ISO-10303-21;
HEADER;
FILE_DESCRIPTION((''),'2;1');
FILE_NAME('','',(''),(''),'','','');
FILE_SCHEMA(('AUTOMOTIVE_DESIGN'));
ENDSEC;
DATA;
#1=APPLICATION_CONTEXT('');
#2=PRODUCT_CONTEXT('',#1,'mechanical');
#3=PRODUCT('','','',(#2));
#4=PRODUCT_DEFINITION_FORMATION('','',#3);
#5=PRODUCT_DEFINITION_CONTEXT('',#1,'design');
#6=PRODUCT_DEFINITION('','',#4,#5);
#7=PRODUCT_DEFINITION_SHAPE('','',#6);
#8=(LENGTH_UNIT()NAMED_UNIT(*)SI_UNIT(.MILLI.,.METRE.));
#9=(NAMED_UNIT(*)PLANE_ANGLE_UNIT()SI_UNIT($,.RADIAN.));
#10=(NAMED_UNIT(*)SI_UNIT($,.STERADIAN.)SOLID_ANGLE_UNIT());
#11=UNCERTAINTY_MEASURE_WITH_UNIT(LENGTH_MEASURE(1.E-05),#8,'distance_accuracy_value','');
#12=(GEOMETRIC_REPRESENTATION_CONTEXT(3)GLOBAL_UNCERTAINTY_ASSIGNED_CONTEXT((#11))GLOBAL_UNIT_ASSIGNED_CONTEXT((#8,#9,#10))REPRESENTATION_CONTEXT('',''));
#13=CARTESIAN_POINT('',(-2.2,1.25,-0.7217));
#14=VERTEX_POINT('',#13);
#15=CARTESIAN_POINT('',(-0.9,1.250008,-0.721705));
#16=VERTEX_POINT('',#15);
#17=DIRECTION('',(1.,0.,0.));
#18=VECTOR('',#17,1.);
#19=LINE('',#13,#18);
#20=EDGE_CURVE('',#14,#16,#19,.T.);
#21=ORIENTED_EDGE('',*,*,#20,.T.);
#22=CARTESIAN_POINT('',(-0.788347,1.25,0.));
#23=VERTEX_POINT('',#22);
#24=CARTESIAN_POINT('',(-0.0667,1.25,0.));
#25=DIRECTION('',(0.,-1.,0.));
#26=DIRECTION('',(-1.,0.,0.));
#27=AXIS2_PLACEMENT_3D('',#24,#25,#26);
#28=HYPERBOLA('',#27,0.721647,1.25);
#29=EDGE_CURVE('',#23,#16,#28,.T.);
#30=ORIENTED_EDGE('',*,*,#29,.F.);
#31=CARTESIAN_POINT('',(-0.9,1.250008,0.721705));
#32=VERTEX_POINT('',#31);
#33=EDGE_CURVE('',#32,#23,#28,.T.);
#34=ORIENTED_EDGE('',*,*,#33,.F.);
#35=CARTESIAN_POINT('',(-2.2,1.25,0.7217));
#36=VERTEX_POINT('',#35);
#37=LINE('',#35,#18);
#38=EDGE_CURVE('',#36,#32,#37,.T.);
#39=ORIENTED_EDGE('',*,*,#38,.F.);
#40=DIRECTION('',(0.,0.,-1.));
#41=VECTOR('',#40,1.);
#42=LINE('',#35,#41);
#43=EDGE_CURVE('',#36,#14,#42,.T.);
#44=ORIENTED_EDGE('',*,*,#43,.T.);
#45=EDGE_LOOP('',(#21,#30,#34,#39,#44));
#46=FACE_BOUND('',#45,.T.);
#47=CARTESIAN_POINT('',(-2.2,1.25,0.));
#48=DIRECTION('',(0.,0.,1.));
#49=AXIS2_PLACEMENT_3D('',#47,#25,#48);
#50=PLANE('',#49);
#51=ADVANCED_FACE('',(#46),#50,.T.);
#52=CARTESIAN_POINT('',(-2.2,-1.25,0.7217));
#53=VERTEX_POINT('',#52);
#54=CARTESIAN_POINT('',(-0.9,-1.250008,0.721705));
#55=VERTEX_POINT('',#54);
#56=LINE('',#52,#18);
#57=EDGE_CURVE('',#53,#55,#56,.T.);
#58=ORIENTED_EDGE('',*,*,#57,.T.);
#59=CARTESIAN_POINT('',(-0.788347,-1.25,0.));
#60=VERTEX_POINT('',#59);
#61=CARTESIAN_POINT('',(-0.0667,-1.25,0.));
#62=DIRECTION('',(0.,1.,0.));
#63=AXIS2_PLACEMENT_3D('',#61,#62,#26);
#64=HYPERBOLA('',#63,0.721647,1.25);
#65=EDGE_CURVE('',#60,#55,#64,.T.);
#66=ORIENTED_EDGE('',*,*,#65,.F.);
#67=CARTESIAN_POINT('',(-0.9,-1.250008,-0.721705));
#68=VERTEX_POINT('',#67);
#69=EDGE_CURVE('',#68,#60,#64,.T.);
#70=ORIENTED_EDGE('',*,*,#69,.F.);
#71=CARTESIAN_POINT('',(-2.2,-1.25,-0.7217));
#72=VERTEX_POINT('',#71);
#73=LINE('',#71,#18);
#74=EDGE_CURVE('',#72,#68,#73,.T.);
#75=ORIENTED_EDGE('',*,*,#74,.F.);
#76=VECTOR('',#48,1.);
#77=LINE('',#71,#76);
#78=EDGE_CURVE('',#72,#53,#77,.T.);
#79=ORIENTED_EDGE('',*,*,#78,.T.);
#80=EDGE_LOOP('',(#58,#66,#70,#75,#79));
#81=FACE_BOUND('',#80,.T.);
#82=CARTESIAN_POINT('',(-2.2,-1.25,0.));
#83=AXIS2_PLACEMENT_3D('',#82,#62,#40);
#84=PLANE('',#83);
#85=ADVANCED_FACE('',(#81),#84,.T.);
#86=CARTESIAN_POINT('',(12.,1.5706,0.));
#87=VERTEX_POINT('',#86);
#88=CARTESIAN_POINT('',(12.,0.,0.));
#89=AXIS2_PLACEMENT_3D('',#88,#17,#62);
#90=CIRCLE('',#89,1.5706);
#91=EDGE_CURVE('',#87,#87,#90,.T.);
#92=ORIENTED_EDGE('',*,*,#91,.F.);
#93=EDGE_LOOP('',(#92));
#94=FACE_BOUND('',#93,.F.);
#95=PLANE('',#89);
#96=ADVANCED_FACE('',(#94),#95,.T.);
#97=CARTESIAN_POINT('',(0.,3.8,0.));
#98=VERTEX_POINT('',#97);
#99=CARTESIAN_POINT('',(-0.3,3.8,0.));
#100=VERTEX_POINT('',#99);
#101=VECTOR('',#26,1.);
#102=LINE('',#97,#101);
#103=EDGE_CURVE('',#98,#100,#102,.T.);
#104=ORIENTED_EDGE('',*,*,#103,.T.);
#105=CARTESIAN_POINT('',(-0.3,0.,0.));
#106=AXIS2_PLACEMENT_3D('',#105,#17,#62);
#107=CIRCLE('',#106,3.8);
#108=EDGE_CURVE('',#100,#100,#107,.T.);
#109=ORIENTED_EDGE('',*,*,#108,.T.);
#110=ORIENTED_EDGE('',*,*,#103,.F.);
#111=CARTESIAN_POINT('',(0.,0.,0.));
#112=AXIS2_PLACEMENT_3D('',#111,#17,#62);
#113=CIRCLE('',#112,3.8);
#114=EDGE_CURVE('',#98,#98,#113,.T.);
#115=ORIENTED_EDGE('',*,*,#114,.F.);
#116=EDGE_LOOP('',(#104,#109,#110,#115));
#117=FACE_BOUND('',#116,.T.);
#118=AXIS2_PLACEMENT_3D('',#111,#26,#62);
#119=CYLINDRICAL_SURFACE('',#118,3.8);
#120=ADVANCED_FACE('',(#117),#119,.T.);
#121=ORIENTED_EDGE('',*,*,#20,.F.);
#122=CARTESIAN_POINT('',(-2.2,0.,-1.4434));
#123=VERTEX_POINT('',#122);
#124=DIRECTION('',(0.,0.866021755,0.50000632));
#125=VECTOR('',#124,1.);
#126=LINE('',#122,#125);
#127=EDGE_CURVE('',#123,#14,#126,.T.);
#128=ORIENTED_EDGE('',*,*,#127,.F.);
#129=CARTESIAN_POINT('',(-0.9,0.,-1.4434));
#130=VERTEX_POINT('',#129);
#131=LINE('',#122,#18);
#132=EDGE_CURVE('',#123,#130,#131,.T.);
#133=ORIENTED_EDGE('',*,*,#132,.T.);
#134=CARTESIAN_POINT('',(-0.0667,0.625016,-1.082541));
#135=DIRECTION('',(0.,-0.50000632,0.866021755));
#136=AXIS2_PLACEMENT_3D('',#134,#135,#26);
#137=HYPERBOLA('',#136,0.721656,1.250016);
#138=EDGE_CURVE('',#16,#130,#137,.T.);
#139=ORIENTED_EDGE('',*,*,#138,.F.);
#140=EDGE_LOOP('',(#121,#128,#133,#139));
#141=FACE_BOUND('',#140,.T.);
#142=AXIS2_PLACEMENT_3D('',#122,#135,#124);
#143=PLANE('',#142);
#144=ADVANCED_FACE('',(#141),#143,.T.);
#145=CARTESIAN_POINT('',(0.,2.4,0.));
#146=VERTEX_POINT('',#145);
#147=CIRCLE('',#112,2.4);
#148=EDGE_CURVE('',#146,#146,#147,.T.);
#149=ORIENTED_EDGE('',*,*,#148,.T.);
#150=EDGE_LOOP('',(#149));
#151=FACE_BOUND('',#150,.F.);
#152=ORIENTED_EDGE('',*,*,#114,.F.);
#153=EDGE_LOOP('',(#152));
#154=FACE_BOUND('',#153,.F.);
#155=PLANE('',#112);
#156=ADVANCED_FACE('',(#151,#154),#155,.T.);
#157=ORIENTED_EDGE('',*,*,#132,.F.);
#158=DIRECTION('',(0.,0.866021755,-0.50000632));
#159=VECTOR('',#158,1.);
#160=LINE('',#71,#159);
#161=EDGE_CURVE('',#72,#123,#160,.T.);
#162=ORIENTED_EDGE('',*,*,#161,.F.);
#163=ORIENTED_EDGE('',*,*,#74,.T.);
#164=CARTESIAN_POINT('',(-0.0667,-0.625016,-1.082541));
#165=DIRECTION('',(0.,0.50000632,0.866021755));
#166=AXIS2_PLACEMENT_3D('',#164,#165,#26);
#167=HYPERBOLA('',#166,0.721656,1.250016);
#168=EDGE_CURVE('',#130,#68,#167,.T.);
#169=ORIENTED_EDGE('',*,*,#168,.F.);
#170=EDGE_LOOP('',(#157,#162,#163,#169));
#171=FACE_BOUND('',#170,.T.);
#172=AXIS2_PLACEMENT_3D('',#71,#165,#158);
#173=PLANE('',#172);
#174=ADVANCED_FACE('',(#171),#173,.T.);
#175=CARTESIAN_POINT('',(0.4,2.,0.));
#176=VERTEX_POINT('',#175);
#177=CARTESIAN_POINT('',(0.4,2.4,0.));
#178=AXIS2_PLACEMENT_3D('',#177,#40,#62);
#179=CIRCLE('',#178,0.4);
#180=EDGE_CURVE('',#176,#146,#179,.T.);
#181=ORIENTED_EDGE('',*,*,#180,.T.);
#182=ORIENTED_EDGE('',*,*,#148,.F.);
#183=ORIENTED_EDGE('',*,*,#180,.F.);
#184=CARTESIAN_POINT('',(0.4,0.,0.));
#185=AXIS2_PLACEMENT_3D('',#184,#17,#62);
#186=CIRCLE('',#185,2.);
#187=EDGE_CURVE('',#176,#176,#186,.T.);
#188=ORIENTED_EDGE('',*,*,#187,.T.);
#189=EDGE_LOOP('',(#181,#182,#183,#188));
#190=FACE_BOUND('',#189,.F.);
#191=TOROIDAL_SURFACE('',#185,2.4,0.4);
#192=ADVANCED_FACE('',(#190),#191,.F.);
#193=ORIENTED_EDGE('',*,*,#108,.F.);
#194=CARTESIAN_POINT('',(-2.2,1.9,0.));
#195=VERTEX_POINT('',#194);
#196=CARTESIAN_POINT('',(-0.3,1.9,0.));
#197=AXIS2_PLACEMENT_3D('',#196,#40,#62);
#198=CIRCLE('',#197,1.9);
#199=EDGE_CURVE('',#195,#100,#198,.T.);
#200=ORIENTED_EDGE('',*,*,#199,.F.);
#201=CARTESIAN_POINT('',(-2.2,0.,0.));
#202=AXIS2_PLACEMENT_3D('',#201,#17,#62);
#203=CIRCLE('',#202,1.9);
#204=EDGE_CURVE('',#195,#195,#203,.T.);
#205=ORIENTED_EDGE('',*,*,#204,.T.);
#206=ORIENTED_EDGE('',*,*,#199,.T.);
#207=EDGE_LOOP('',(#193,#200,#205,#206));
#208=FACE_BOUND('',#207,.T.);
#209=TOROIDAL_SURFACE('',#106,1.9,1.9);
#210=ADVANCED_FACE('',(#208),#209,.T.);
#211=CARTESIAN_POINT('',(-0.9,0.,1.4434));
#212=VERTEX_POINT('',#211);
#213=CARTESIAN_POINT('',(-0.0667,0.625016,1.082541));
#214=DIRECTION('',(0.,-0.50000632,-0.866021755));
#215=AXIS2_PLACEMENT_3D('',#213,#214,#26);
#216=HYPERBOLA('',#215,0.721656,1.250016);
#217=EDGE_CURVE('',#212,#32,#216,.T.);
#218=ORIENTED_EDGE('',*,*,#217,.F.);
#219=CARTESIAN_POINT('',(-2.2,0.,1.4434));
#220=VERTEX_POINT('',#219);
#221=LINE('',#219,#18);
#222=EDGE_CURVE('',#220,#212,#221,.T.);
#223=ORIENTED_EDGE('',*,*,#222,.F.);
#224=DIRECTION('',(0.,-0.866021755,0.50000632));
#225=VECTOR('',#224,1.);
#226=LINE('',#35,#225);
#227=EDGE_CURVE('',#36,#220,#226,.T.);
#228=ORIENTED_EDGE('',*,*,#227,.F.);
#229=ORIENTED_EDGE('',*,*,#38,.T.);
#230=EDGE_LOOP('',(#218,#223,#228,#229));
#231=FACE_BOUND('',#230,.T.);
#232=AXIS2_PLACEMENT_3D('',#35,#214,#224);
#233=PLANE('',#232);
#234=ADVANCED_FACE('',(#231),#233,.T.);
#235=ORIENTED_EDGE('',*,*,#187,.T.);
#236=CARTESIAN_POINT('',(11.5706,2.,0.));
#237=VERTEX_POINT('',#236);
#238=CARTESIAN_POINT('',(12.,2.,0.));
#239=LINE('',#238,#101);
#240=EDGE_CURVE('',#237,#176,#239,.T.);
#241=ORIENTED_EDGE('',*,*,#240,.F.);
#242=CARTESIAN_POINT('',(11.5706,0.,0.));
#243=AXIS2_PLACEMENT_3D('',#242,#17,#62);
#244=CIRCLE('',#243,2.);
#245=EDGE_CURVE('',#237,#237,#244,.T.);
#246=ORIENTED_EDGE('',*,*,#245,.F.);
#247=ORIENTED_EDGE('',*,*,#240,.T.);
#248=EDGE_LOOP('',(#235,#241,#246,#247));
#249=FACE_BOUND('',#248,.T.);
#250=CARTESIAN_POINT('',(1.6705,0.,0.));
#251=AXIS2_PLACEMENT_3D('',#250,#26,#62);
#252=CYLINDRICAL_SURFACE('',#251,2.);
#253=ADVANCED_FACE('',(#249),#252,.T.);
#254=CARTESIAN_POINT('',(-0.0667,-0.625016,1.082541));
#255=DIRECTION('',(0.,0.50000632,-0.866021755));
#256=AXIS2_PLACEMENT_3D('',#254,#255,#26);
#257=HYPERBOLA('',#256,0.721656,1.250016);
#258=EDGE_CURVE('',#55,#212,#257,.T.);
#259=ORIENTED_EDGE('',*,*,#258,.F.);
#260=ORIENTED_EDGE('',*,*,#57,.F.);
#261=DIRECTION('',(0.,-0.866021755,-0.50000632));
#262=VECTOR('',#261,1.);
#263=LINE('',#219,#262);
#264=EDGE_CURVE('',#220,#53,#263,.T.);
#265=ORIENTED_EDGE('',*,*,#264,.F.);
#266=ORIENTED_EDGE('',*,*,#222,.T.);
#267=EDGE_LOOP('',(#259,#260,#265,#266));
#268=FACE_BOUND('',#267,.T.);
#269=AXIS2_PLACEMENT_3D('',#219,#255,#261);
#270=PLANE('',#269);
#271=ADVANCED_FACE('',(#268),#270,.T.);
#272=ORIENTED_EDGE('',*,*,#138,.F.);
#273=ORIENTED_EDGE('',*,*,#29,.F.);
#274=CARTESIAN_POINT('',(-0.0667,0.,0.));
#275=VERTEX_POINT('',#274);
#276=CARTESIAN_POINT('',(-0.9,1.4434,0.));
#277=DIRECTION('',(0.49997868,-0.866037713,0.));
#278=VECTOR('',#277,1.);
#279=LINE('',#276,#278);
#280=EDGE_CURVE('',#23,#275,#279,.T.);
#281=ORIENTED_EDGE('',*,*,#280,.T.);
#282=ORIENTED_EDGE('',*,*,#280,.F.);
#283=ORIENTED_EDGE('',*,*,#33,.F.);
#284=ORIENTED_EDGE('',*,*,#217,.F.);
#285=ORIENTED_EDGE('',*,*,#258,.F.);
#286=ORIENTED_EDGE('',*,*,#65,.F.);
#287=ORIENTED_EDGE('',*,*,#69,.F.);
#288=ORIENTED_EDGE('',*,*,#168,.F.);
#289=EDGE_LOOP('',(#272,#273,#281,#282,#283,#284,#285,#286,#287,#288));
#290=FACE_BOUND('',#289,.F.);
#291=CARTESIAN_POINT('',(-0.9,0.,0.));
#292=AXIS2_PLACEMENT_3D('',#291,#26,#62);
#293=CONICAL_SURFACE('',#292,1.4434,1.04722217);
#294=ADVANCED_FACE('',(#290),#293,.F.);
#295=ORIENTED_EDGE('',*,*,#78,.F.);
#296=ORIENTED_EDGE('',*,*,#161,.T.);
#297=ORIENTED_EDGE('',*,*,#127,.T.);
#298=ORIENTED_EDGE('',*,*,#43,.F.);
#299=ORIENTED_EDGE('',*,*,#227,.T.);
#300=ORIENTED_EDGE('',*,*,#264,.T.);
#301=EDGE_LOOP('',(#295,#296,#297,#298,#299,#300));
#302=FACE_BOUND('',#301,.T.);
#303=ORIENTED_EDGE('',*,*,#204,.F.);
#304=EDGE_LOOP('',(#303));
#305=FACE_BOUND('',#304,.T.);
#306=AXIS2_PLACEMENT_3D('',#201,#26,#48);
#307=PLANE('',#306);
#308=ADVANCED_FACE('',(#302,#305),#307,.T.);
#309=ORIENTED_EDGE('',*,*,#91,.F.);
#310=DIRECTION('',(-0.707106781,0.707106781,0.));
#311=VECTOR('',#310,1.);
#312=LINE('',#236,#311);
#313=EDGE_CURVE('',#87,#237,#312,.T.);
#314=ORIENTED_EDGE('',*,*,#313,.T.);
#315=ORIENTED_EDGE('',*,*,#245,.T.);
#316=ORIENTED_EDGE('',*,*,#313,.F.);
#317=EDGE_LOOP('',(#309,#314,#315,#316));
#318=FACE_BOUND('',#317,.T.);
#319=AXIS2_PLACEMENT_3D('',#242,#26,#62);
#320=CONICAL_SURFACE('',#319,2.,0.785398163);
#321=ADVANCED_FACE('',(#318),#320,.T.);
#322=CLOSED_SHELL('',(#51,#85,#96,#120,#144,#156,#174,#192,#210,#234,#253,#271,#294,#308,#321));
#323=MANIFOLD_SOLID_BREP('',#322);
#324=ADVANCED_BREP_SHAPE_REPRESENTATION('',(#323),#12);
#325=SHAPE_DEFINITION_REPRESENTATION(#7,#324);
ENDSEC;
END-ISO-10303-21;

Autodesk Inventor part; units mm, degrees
ref_plane "YZ Plane" through (0, 0, 0) normal (1, 0, 0) x (0, 1, 0)
ref_plane "XZ Plane" through (0, 0, 0) normal (0, 1, 0) x (-1, 0, 0)
sketch "Sketch1" plane through (0, 0, 0) normal (0, 0, 1) x (1, 0, 0)
  line L0 (-0.0667, 0) -> (12, 0)
  line L1 (12, 0) -> (12, 2)
  line L2 (12, 2) -> (2.1, 2)
  line L3 (2.1, 2) -> (1.6705, 2)
  line L4 (1.6705, 2) -> (0, 2)
  line L5 (0, 2) -> (0, 3.8)
  line L6 (0, 3.8) -> (-2.2, 3.8)
  line L7 (-2.2, 3.8) -> (-2.2, 1.4434)
  line L8 (-2.2, 1.4434) -> (-0.9, 1.4434)
  line L9 (-0.9, 1.4434) -> (-0.0667, 0)
  line L10 (-5.04, 0) -> (14.84, 0) projected
  line L11 (0, -0.76) -> (0, 4.56) projected
  line L12 (2.1, 2) -> (0, 2) construction
  dimension "d1" = 9.9
  dimension "d2" = 0.4295
  dimension "d3" = 2.2
  dimension "d4" = 1.3
  dimension "d5" = 60
  dimension "d6" = 4
  dimension "d7" = 4
  dimension "d8" = 2.8868
  dimension "d9" = 7.6
  dimension "d26" = 12
revolve "Body" add sketch "Sketch1" angle 360 about axis through (-0.0667, 0, 0) along (1, 0, 0)
sketch "Sketch2" plane through (-2.2, 0, 0) normal (-1, 0, 0) x (0, 0, 1)
  circle A0 centre (0, 0) radius 1.4434 projected
  line L0 (0, -5.32) -> (0, 5.32) projected
  line L1 (-5.32, 0) -> (5.32, 0) projected
  line L2 (1.4434, 0) -> (0.7217, -1.25)
  line L3 (0.7217, -1.25) -> (-0.7217, -1.25)
  line L4 (-0.7217, -1.25) -> (-1.4434, 0)
  line L5 (-1.4434, 0) -> (-0.7217, 1.25)
  line L6 (-0.7217, 1.25) -> (0.7217, 1.25)
  line L7 (0.7217, 1.25) -> (1.4434, 0)
extrude "Slot" add sketch "Sketch2" against normal up to next contours L7 A0 | A0 L2 | L6 L0 A0 | A0 L0 L3 | L0 L6 A0 | A0 L3 L0 | L4 A0 | A0 L5
fillet "Fillet1" radius 1.9 1 edges at (-2.2, -3.8, 0)
thread "Thread" size "M4x0.7" class "6g" standard "ISO Metric profile" length 9.9
chamfer "Chamfer1" distance 0.4294 distance2 0.4294 1 edges at (12, -2, 0) measured on face at (12, -1.1003, -0.6618)
ref_plane "Work Plane1" through (29, 0, 0) normal (0, -1, 0) x (1, 0, 0)
fillet "Fillet2" radius 0.4 1 edges at (0, -2, 0)
equation "\"d30\" = R"
equation "\"d17\" = RR"
equation "\"d13\" = GEL"
equation "\"d15\" = -0.5 * SPD + 0.5 * GD"
equation "\"d16\" = GUL"
equation "\"d1\" = GEL"
equation "\"d3\" = KOH"
equation "\"d4\" = INTI"
equation "\"d6\" = GD"
equation "\"d7\" = BDM"
equation "\"d8\" = 1.1547 * SW"
equation "\"d9\" = KOD"
equation "\"d26\" = NLG"
equation "\"GD\" = NND"
equation "\"NLG\" = 12"
equation "\"GEL\" = 9.9"
equation "\"KOD\" = 7.6"
equation "\"KOH\" = 2.2"
equation "\"INTI\" = 1.3"
equation "\"GAL\" = 0.61345 * PTC"
equation "\"GUL\" = 0.61345 * PTC"
equation "\"BDM\" = NND"
equation "\"SW\" = 2.5"
equation "\"RR\" = 1.9"
equation "\"SPD\" = NND - 1.2269 * PTC"
equation "\"R\" = 0.4"
equation "\"TOA\" = 30deg"
equation "\"GD1\" = THREADDIA - 1.2269 * PTC"
equation "\"THREADDIA\" = 4"
equation "\"PTC\" = 0.7"
equation "\"NND\" = 4"
equation "\"KOH1\" = 0.3"
equation "\"E0\" = 2.873"
properties part number "ISO 7380-1 - M4 x 12" material "Steel"
